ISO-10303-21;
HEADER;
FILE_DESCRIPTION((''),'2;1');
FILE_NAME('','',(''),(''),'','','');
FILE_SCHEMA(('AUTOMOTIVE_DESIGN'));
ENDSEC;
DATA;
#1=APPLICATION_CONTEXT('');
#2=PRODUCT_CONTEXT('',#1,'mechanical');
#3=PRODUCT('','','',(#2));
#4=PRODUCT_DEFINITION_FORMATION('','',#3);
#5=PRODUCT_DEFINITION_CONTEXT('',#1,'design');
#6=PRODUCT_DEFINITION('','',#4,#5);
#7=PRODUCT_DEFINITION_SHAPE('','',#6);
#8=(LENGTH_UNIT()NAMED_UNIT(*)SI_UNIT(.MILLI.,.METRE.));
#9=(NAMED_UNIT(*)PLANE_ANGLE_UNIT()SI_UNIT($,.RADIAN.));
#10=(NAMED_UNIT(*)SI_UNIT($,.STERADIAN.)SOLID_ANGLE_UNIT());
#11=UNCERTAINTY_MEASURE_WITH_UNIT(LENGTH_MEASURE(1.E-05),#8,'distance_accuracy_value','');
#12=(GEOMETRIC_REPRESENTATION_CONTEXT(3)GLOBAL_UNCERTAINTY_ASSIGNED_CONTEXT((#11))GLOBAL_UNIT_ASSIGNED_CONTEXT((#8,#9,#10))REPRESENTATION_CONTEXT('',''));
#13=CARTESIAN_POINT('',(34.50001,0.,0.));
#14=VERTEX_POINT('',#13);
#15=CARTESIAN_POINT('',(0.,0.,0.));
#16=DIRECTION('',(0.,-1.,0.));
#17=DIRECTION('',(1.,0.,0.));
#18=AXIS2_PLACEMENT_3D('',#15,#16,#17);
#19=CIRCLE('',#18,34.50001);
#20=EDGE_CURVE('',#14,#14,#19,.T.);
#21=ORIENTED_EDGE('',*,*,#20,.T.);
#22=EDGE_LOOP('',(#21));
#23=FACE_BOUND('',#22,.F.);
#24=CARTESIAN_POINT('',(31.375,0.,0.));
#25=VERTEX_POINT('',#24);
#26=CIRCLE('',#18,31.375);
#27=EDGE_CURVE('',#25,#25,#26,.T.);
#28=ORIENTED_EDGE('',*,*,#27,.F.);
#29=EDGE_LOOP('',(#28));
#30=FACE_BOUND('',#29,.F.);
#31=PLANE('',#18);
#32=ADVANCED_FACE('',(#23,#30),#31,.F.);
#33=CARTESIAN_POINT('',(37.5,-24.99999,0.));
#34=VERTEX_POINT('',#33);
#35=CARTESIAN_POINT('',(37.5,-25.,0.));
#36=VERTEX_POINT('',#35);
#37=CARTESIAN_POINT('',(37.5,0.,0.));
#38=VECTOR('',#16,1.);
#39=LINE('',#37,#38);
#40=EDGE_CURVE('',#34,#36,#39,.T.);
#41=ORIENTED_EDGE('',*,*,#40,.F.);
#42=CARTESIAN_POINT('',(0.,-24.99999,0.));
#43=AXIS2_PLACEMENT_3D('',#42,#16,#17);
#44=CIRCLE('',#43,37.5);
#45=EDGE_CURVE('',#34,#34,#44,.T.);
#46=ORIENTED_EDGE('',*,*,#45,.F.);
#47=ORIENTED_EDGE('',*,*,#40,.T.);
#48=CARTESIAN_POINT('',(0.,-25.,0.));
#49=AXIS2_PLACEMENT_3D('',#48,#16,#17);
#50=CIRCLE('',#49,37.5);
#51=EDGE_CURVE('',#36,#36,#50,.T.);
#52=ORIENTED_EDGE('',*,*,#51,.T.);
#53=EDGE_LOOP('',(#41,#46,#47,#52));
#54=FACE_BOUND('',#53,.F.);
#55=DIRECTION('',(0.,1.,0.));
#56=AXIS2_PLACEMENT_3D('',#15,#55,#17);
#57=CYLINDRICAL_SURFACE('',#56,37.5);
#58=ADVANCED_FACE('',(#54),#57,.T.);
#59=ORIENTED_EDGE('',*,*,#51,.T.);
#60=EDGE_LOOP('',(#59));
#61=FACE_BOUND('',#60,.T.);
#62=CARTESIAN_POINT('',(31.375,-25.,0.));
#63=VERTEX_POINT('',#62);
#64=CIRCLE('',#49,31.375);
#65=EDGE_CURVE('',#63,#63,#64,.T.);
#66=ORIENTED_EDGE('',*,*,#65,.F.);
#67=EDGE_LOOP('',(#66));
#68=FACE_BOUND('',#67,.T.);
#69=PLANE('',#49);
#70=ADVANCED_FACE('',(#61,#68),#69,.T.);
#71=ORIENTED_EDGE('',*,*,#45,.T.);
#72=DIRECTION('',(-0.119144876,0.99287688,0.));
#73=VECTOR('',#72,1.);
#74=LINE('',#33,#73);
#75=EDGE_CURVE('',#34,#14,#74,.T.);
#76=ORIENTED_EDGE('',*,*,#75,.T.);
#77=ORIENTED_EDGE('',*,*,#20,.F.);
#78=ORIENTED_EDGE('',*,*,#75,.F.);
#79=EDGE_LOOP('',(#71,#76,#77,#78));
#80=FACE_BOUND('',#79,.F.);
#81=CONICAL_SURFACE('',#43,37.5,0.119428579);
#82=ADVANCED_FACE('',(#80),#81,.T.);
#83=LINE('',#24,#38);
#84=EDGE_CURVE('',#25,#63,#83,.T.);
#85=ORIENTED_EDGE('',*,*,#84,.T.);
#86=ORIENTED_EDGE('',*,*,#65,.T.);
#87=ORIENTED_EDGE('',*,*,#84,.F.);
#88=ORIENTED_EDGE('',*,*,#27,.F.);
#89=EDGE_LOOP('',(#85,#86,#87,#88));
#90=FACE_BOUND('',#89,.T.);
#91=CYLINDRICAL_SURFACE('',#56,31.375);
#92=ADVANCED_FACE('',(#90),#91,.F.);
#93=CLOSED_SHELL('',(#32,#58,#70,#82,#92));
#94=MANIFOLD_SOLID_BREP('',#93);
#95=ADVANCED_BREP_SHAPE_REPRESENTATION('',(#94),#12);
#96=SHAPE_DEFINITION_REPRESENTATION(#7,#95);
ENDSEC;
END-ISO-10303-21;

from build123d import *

# Parameters (mm, degrees)
F0_R     = 37.5
F0_R_2   = 31.375
F1_DEPTH = 25
F2_SIZE2 = 2.99999
F2_SIZE  = 24.99999


# Not quite as in the source:
# - a fillet or chamfer is up to 0.001 mm smaller than in the source, because OpenCascade refuses the exact size


with BuildPart() as f1:
    # F0 (on Front) → F1 (new body)
    with BuildSketch(Plane.XZ):
        Circle(F0_R)
        Circle(F0_R_2, mode=Mode.SUBTRACT)
    extrude(amount=F1_DEPTH)

    # F2 (size 25 and 3 in the source; OpenCascade refuses exactly that, so slightly less here)
    f2_edges = [f1.edges().sort_by_distance(p)[0] for p in [
        (-37.5, 0, 0),
    ]]
    f2_side = f1.faces().sort_by_distance((-37.5, -12.5, 0))[0]
    chamfer(f2_edges, length=F2_SIZE, length2=F2_SIZE2, reference=f2_side)


solid = f1.part
